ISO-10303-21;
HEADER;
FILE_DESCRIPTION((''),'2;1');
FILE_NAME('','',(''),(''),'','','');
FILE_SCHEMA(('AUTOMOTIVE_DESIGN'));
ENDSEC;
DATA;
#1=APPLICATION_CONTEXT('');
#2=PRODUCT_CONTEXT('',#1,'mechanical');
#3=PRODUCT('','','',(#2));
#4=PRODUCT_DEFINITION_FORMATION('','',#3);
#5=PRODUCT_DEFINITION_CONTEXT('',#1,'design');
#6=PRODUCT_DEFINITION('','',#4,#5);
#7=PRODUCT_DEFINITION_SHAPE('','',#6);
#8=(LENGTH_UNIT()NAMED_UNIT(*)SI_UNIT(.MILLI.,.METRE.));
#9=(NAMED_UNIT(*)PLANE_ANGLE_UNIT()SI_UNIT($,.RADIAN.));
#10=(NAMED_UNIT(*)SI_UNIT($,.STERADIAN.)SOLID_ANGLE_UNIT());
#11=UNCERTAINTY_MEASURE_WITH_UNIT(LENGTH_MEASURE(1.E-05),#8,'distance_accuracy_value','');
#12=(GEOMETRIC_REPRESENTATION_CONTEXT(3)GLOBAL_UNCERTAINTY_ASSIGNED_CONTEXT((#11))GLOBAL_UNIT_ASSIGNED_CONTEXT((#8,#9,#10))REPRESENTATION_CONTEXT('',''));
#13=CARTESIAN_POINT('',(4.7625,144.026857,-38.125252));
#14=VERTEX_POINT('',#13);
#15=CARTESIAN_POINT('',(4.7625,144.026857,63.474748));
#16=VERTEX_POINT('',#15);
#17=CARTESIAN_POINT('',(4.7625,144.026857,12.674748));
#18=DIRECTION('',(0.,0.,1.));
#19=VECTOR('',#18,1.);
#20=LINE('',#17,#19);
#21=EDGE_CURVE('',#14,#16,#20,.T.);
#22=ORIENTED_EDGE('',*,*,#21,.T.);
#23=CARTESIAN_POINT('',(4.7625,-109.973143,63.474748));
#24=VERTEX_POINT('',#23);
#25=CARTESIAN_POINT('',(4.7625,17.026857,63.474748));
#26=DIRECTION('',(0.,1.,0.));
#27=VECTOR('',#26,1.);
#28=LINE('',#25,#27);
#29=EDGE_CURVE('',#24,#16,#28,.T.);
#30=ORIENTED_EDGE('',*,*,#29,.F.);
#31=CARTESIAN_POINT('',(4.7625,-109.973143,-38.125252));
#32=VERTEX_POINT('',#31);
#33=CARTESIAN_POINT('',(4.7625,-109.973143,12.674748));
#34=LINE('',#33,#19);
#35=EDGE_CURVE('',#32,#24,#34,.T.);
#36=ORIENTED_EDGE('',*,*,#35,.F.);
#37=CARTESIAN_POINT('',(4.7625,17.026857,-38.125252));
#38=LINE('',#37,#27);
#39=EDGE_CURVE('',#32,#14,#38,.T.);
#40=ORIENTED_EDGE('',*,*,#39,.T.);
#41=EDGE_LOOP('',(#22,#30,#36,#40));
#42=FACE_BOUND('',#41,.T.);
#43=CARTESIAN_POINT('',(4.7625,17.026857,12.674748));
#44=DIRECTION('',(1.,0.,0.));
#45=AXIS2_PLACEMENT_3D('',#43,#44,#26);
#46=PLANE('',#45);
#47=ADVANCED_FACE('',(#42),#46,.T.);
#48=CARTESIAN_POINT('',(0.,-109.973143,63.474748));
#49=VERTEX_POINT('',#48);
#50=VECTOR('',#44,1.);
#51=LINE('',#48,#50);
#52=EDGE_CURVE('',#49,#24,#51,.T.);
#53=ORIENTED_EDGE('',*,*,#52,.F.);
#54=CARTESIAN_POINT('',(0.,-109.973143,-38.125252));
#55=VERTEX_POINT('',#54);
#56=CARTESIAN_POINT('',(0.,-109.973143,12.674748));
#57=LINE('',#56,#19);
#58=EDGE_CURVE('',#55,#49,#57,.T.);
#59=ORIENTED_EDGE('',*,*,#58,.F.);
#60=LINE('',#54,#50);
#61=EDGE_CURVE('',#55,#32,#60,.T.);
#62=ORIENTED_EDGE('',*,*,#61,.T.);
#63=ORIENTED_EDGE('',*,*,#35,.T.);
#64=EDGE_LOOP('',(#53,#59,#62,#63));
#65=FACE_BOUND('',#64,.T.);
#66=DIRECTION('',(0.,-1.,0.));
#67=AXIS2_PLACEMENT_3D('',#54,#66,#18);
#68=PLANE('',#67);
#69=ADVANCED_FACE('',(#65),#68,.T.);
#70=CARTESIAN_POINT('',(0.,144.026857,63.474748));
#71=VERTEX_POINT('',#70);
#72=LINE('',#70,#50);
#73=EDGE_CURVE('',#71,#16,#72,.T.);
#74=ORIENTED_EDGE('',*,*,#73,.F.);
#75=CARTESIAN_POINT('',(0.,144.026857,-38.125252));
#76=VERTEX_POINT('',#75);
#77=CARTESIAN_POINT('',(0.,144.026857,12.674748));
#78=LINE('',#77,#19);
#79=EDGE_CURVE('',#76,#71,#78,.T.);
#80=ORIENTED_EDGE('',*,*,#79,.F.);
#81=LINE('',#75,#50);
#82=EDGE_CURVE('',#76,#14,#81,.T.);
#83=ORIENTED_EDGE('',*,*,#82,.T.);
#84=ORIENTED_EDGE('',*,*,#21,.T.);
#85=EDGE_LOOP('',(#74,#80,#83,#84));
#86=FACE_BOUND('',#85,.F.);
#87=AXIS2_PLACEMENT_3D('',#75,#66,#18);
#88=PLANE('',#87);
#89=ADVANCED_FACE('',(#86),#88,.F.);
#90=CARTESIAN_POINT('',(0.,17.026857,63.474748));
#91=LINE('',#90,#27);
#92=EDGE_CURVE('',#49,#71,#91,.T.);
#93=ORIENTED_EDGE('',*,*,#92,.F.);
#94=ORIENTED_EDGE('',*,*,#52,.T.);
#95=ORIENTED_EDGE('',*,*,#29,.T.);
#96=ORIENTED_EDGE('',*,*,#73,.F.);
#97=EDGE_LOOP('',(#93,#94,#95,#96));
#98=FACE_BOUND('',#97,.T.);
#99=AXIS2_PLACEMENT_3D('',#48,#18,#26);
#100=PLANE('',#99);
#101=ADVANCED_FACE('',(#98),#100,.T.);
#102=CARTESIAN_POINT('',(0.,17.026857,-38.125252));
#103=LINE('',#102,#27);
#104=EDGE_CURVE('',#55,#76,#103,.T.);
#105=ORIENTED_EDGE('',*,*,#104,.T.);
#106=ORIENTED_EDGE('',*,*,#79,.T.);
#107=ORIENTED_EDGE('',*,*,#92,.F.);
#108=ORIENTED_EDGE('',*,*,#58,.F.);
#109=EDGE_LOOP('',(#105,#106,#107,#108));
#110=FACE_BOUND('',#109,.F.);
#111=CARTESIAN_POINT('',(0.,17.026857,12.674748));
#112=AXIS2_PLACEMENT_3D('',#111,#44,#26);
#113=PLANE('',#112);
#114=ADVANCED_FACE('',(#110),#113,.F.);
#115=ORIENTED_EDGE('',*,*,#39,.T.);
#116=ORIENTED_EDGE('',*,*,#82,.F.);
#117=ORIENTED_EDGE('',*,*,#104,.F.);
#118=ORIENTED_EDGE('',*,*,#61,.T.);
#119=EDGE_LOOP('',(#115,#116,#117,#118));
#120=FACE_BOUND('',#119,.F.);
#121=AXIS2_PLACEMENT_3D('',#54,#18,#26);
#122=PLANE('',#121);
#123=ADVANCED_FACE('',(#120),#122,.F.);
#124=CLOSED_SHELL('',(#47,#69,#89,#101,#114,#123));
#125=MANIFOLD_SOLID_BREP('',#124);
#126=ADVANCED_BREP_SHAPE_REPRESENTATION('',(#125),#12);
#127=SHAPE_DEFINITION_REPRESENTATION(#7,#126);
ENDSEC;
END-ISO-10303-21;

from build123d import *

# Parameters (mm, degrees)
F0_W     = 254
F0_H     = 101.6
F1_DEPTH = 4.7625


# Not quite as in the source:
# - a length typed as a fraction of an inch, garbled in the dataset ("3 / 203.2 mm" for 3/8 in), is restored


with BuildPart() as f1:
    # F0 (on Right) → F1 (new body)
    with BuildSketch(Plane.YZ):
        with Locations((17.0268568486, 12.6747479189)):
            Rectangle(F0_W, F0_H)
    extrude(amount=F1_DEPTH)


solid = f1.part
